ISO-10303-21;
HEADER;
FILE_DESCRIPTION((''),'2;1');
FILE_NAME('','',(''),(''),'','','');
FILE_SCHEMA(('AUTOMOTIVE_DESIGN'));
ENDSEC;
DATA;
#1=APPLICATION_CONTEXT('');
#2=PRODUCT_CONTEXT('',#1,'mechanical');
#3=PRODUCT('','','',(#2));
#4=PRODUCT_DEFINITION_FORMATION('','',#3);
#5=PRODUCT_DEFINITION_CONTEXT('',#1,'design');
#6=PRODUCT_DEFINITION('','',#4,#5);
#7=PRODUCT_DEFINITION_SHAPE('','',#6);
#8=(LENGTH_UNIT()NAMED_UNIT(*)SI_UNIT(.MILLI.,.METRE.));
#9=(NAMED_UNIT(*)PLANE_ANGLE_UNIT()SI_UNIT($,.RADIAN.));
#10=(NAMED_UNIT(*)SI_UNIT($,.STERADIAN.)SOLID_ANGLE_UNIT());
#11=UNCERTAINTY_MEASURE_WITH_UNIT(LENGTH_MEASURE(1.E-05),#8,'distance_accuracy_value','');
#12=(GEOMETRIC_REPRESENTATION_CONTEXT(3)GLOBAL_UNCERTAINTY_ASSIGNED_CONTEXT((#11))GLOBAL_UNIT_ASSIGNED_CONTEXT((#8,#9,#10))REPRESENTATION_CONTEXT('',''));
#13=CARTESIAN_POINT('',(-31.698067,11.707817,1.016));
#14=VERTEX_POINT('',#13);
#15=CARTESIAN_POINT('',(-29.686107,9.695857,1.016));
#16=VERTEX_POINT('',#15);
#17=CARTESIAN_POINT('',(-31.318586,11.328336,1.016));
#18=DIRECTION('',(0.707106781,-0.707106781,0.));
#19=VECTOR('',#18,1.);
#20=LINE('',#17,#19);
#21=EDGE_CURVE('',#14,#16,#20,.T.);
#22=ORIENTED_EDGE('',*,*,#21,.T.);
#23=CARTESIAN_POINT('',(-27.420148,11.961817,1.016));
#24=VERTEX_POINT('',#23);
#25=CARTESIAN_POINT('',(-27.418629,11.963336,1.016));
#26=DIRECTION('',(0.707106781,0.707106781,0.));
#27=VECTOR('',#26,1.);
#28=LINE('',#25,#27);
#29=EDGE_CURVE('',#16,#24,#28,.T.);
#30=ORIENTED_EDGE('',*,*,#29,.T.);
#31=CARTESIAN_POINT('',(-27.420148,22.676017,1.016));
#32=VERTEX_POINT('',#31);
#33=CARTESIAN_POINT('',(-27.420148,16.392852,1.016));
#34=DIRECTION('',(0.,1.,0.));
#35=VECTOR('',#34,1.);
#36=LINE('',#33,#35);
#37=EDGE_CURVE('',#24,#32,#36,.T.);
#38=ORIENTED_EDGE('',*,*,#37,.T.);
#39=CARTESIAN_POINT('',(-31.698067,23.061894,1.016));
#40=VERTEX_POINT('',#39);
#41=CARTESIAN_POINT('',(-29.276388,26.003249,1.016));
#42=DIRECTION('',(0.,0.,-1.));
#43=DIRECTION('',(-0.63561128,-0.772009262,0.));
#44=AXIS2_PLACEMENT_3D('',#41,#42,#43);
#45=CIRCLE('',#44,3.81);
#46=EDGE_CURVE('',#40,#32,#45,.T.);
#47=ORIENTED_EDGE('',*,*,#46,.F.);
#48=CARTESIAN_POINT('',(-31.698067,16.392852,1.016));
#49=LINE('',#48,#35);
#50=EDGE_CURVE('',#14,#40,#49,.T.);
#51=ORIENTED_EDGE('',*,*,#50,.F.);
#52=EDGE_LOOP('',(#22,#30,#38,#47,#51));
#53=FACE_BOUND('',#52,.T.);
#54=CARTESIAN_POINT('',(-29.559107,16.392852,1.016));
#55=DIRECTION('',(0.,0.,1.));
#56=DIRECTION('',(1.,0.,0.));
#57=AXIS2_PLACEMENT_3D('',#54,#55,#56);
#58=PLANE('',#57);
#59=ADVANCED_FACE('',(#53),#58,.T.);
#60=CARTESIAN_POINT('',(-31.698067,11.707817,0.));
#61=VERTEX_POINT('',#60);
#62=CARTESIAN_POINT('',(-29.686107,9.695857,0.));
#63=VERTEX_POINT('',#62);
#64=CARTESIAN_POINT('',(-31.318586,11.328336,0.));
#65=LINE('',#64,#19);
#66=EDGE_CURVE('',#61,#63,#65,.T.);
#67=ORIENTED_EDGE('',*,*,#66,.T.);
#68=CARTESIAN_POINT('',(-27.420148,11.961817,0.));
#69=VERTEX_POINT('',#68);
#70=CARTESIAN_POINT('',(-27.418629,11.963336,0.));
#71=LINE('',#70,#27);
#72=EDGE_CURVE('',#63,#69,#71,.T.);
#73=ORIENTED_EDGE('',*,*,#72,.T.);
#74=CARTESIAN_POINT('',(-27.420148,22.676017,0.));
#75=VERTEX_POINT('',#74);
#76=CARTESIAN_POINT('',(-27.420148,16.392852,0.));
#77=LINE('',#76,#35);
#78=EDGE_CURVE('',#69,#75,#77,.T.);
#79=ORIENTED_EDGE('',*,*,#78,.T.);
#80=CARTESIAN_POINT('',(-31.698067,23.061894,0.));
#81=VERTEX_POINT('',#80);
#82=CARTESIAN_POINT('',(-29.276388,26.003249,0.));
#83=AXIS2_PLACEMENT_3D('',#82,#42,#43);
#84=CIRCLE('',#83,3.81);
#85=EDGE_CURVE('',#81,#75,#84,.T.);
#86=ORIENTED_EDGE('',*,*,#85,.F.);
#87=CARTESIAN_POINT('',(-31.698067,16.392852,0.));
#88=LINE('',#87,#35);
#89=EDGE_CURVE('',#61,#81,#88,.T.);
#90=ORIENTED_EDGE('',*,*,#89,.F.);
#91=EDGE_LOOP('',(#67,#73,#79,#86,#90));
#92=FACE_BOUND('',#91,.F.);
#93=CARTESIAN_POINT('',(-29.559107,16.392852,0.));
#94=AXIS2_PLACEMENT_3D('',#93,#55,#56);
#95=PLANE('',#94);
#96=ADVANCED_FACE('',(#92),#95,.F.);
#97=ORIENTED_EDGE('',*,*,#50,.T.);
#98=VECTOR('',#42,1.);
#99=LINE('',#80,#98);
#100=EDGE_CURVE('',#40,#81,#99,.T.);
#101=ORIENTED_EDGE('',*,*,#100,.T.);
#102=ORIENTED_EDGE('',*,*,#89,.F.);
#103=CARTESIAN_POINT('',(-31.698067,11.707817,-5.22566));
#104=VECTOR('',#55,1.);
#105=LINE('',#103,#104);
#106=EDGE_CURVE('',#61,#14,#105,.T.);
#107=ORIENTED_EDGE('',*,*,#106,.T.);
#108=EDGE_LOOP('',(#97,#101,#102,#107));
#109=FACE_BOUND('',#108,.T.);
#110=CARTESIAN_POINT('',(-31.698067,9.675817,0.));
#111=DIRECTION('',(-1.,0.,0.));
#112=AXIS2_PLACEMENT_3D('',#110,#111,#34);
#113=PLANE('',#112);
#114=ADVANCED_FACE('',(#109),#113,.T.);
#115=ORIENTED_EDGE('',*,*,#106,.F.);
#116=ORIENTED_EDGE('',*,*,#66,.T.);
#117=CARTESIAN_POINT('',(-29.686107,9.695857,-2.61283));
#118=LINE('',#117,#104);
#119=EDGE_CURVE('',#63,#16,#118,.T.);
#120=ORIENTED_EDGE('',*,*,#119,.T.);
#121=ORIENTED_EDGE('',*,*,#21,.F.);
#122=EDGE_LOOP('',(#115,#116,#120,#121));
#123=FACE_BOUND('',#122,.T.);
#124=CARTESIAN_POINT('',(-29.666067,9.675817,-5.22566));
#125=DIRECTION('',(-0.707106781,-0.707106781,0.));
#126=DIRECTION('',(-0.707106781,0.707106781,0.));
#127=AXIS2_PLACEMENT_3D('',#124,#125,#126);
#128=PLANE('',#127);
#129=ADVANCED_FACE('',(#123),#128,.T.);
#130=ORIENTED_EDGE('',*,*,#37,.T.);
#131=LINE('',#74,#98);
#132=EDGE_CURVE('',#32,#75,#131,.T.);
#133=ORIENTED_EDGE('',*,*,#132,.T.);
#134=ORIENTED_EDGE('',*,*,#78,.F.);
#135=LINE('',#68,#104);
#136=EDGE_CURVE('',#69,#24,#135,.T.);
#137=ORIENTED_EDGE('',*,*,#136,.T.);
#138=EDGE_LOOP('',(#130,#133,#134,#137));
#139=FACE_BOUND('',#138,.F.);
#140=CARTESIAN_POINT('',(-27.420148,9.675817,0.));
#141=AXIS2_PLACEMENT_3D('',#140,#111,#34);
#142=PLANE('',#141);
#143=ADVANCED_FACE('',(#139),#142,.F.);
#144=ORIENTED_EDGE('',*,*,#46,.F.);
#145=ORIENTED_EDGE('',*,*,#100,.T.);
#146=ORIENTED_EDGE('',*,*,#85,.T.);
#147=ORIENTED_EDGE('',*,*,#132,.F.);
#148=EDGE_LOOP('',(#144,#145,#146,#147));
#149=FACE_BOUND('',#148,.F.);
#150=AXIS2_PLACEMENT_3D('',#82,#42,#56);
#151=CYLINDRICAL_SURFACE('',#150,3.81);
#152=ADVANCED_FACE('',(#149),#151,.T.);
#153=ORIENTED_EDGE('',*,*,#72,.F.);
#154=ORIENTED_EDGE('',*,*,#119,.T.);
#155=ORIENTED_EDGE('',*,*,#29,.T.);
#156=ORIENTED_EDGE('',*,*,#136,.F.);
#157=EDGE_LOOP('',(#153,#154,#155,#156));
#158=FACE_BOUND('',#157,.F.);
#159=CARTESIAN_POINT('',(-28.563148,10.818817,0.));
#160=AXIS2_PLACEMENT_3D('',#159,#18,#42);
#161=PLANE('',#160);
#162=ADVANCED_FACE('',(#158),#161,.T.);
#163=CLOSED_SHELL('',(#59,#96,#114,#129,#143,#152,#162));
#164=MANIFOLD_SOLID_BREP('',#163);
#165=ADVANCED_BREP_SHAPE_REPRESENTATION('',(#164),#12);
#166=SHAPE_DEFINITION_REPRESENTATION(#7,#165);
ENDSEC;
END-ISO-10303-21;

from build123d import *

# Parameters (mm, degrees)
F0_R        = 3.81
F1_DEPTH    = 1.016
F2_W        = 4.2779184878
F2_H        = 13.4340701625
F3_DEPTH    = 1.016
F4_SIZE     = 2.286
F5_T1_DEPTH = 11.4673196631


# Not quite as in the source:
# - a fillet or chamfer that OpenCascade refuses, or shapes differently, is made with other operations: its cross-section is extruded or revolved along the edge and cut away or added


with BuildPart() as f1:
    # F0 (on Top) → F1 (new body)
    with BuildSketch(Plane.XY):
        with Locations((-29.276387766, 26.0032489896)):
            Circle(F0_R)
    extrude(amount=F1_DEPTH)

    # F2 (on Top) → F3 (join)
    with BuildSketch(Plane.XY):
        with Locations((-29.5591074973, 16.392851714)):
            Rectangle(F2_W, F2_H)
    extrude(amount=F3_DEPTH)

    # F4
    f4_edges = [f1.edges().sort_by_distance(p)[0] for p in [
        (-27.420148, 9.675817, 0.508),
    ]]
    chamfer(f4_edges, length=F4_SIZE)

    # F5: chamfer of 2.032 on 1 edges, made by hand

    # F5_s2 → F5_t1 (cut)
    with BuildSketch(Plane.XY.offset(-5.2256598315)):
        Polygon((-29.6660667412, 9.6758166328), (-31.6980667412, 11.7078166328), (-31.6980667412, 9.6758166328), align=None)
    extrude(amount=F5_T1_DEPTH, mode=Mode.SUBTRACT)


solid = f1.part
